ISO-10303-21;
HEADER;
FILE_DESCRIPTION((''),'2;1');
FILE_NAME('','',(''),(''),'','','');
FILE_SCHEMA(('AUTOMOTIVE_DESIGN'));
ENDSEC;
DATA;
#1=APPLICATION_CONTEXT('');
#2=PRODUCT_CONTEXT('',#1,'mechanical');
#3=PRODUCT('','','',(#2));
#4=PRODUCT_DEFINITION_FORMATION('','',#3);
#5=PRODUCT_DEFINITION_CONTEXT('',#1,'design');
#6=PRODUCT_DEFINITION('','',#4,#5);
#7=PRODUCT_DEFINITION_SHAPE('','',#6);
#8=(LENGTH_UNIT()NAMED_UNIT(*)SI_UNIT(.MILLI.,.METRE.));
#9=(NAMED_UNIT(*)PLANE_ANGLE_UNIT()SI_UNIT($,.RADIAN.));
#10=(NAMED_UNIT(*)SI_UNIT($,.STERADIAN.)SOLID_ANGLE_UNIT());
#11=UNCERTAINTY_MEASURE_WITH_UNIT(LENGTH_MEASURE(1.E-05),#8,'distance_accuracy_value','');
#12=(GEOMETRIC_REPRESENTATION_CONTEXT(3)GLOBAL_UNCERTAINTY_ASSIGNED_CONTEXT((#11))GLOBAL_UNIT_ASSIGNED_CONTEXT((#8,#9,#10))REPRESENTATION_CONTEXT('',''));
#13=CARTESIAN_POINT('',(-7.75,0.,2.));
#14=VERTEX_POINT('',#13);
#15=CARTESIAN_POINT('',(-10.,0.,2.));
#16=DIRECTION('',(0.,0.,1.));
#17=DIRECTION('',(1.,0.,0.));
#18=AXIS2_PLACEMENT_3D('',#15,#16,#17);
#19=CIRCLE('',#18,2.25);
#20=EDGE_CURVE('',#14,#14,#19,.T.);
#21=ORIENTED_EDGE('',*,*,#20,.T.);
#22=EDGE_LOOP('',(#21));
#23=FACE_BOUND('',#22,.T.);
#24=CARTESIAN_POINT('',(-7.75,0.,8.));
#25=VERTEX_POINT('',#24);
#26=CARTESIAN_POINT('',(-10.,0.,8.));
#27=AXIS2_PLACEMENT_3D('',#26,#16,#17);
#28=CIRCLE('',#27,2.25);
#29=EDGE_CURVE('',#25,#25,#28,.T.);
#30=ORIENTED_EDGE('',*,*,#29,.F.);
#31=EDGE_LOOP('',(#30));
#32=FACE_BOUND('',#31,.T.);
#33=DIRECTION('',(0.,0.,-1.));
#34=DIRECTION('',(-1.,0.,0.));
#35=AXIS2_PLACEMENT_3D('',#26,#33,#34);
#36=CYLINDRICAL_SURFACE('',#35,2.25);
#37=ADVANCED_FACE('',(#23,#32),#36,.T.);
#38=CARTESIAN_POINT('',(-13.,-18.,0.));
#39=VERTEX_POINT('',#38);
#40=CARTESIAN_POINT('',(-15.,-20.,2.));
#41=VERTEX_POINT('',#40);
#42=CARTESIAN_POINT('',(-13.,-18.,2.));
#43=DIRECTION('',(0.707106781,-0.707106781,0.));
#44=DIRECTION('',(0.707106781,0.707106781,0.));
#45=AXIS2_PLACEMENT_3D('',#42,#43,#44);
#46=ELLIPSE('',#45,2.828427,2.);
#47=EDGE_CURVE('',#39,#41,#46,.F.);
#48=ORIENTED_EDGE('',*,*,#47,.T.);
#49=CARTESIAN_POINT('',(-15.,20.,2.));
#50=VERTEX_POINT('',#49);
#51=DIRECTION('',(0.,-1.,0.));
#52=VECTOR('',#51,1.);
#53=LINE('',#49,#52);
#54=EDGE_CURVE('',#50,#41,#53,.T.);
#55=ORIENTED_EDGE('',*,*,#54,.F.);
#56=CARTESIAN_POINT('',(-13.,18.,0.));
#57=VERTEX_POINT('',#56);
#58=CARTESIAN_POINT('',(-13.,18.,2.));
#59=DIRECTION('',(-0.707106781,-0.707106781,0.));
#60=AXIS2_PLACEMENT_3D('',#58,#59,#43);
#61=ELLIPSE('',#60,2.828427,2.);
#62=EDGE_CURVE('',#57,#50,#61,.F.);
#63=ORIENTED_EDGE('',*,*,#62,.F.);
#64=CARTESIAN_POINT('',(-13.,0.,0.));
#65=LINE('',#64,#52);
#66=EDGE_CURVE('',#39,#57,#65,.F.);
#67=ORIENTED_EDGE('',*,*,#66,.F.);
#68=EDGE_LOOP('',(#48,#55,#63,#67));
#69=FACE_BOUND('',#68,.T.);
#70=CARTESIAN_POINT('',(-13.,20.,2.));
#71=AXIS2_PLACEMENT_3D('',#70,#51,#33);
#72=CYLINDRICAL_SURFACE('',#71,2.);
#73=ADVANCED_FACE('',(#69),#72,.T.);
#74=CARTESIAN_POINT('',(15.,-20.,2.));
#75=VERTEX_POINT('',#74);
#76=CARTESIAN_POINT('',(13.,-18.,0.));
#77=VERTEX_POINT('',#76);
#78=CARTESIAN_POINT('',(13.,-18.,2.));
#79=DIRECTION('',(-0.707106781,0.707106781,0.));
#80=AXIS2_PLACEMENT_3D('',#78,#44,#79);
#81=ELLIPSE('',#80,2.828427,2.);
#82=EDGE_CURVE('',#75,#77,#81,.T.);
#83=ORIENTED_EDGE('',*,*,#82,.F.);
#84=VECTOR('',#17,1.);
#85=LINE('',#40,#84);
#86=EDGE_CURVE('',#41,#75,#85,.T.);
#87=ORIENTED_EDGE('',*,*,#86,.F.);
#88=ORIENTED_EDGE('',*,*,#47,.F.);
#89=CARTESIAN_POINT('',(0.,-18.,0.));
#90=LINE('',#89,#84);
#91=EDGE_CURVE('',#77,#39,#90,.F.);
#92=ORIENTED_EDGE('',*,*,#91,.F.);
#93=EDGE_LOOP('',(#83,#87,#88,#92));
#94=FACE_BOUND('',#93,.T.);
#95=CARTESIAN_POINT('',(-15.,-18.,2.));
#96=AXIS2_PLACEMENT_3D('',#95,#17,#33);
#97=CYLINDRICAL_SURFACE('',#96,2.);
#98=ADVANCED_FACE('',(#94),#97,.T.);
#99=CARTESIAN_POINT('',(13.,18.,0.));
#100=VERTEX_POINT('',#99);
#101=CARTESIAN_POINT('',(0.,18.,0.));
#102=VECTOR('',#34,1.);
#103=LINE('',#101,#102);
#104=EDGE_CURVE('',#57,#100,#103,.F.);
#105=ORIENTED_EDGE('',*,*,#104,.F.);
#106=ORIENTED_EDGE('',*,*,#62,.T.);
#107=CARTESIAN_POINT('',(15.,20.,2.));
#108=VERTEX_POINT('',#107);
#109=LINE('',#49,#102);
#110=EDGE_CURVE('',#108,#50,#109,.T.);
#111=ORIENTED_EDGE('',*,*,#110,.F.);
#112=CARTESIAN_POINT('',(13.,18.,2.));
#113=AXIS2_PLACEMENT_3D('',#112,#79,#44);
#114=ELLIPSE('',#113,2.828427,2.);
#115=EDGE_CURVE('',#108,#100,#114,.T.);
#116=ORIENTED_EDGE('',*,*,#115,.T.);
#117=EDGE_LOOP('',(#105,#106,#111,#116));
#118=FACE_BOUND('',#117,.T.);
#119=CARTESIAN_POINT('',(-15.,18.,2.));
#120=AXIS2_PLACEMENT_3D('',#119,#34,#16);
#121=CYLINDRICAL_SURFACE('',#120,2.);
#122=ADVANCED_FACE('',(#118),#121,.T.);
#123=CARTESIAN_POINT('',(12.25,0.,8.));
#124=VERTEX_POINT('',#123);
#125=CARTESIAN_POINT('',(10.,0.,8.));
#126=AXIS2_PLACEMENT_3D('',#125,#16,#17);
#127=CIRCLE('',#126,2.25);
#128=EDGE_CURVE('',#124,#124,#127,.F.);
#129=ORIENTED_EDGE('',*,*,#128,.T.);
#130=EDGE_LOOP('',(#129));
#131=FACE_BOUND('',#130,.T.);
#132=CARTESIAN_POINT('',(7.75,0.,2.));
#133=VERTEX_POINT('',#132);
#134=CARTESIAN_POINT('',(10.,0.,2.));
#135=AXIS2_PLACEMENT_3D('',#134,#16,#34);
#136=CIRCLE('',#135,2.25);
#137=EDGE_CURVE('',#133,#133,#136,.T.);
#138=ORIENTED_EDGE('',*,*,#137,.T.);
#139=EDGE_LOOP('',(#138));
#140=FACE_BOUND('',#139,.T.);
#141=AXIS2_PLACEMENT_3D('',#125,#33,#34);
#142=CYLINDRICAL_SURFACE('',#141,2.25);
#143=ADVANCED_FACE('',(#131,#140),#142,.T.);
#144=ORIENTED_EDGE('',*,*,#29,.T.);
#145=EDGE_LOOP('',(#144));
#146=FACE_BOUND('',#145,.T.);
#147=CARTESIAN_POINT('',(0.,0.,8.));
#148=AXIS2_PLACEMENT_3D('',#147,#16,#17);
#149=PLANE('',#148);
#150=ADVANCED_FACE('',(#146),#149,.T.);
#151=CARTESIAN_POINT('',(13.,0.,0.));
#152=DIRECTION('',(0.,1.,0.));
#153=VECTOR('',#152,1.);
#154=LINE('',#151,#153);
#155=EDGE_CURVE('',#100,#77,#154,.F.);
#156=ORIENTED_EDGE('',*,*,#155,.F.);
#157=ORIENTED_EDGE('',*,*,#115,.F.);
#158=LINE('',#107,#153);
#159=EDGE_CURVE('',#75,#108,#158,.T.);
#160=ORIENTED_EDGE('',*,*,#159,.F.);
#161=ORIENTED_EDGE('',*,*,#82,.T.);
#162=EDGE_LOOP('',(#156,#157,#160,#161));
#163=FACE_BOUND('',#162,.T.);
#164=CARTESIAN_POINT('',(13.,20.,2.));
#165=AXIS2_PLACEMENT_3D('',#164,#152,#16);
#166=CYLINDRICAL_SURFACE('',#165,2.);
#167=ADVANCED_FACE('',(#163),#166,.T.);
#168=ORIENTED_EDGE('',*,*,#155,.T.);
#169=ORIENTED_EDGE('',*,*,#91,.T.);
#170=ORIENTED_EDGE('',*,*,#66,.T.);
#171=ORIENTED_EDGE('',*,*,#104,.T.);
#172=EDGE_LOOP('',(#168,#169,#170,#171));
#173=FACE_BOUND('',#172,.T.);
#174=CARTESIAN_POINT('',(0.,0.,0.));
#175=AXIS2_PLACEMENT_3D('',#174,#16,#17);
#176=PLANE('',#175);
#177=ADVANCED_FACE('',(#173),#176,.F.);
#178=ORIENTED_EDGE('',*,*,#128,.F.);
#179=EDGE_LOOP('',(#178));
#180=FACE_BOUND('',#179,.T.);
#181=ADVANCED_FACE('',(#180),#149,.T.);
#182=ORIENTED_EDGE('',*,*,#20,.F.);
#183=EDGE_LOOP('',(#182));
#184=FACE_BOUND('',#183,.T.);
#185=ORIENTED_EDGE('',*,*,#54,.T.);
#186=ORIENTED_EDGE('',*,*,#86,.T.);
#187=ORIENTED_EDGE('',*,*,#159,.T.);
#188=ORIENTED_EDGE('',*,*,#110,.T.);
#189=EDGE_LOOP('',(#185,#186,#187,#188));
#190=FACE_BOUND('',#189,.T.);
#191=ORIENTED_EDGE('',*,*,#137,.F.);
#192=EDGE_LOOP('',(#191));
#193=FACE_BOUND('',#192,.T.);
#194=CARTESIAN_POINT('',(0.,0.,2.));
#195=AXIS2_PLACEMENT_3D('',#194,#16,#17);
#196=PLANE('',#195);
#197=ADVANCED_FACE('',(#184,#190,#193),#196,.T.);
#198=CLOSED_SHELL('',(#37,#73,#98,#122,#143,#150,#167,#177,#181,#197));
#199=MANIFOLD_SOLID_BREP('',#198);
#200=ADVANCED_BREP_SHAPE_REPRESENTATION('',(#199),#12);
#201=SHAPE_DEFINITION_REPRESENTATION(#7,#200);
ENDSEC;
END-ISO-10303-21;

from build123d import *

# Parameters (mm, degrees)
SKETCH1_W           = 30
SKETCH1_H           = 40
SKETCH1_R           = 2.25
BOSS_EXTRUDE1_DEPTH = 2
SKETCH1_4_R         = 2.25
BOSS_EXTRUDE2_DEPTH = 8
FILLET1_R           = 2


with BuildPart() as part:
    # Sketch1 → Boss-Extrude1 (new body)
    with BuildSketch(Plane.XY):
        Rectangle(SKETCH1_W, SKETCH1_H)
        with Locations((-10, 0)):
            Circle(SKETCH1_R, mode=Mode.SUBTRACT)
        with Locations(Location((10, 0, 0), (0, 0, 180))):
            Circle(SKETCH1_R, mode=Mode.SUBTRACT)
    extrude(amount=BOSS_EXTRUDE1_DEPTH)

    # Sketch1<4> → Boss-Extrude2 (add)
    with BuildSketch(Plane.XY):
        with Locations((-10, 0)):
            Circle(SKETCH1_4_R)
        with Locations(Location((10, 0, 0), (0, 0, 180))):
            Circle(SKETCH1_4_R)
    extrude(amount=BOSS_EXTRUDE2_DEPTH)

    # Fillet1
    fillet1_edges = [part.edges().sort_by_distance(p)[0] for p in [
        (0, 20, 0),
        (-15, 0, 0),
        (0, -20, 0),
        (15, 0, 0),
    ]]
    fillet(fillet1_edges, radius=FILLET1_R - 0.0001)  # a hair under: the kernel refuses the full size


solid = part.part
